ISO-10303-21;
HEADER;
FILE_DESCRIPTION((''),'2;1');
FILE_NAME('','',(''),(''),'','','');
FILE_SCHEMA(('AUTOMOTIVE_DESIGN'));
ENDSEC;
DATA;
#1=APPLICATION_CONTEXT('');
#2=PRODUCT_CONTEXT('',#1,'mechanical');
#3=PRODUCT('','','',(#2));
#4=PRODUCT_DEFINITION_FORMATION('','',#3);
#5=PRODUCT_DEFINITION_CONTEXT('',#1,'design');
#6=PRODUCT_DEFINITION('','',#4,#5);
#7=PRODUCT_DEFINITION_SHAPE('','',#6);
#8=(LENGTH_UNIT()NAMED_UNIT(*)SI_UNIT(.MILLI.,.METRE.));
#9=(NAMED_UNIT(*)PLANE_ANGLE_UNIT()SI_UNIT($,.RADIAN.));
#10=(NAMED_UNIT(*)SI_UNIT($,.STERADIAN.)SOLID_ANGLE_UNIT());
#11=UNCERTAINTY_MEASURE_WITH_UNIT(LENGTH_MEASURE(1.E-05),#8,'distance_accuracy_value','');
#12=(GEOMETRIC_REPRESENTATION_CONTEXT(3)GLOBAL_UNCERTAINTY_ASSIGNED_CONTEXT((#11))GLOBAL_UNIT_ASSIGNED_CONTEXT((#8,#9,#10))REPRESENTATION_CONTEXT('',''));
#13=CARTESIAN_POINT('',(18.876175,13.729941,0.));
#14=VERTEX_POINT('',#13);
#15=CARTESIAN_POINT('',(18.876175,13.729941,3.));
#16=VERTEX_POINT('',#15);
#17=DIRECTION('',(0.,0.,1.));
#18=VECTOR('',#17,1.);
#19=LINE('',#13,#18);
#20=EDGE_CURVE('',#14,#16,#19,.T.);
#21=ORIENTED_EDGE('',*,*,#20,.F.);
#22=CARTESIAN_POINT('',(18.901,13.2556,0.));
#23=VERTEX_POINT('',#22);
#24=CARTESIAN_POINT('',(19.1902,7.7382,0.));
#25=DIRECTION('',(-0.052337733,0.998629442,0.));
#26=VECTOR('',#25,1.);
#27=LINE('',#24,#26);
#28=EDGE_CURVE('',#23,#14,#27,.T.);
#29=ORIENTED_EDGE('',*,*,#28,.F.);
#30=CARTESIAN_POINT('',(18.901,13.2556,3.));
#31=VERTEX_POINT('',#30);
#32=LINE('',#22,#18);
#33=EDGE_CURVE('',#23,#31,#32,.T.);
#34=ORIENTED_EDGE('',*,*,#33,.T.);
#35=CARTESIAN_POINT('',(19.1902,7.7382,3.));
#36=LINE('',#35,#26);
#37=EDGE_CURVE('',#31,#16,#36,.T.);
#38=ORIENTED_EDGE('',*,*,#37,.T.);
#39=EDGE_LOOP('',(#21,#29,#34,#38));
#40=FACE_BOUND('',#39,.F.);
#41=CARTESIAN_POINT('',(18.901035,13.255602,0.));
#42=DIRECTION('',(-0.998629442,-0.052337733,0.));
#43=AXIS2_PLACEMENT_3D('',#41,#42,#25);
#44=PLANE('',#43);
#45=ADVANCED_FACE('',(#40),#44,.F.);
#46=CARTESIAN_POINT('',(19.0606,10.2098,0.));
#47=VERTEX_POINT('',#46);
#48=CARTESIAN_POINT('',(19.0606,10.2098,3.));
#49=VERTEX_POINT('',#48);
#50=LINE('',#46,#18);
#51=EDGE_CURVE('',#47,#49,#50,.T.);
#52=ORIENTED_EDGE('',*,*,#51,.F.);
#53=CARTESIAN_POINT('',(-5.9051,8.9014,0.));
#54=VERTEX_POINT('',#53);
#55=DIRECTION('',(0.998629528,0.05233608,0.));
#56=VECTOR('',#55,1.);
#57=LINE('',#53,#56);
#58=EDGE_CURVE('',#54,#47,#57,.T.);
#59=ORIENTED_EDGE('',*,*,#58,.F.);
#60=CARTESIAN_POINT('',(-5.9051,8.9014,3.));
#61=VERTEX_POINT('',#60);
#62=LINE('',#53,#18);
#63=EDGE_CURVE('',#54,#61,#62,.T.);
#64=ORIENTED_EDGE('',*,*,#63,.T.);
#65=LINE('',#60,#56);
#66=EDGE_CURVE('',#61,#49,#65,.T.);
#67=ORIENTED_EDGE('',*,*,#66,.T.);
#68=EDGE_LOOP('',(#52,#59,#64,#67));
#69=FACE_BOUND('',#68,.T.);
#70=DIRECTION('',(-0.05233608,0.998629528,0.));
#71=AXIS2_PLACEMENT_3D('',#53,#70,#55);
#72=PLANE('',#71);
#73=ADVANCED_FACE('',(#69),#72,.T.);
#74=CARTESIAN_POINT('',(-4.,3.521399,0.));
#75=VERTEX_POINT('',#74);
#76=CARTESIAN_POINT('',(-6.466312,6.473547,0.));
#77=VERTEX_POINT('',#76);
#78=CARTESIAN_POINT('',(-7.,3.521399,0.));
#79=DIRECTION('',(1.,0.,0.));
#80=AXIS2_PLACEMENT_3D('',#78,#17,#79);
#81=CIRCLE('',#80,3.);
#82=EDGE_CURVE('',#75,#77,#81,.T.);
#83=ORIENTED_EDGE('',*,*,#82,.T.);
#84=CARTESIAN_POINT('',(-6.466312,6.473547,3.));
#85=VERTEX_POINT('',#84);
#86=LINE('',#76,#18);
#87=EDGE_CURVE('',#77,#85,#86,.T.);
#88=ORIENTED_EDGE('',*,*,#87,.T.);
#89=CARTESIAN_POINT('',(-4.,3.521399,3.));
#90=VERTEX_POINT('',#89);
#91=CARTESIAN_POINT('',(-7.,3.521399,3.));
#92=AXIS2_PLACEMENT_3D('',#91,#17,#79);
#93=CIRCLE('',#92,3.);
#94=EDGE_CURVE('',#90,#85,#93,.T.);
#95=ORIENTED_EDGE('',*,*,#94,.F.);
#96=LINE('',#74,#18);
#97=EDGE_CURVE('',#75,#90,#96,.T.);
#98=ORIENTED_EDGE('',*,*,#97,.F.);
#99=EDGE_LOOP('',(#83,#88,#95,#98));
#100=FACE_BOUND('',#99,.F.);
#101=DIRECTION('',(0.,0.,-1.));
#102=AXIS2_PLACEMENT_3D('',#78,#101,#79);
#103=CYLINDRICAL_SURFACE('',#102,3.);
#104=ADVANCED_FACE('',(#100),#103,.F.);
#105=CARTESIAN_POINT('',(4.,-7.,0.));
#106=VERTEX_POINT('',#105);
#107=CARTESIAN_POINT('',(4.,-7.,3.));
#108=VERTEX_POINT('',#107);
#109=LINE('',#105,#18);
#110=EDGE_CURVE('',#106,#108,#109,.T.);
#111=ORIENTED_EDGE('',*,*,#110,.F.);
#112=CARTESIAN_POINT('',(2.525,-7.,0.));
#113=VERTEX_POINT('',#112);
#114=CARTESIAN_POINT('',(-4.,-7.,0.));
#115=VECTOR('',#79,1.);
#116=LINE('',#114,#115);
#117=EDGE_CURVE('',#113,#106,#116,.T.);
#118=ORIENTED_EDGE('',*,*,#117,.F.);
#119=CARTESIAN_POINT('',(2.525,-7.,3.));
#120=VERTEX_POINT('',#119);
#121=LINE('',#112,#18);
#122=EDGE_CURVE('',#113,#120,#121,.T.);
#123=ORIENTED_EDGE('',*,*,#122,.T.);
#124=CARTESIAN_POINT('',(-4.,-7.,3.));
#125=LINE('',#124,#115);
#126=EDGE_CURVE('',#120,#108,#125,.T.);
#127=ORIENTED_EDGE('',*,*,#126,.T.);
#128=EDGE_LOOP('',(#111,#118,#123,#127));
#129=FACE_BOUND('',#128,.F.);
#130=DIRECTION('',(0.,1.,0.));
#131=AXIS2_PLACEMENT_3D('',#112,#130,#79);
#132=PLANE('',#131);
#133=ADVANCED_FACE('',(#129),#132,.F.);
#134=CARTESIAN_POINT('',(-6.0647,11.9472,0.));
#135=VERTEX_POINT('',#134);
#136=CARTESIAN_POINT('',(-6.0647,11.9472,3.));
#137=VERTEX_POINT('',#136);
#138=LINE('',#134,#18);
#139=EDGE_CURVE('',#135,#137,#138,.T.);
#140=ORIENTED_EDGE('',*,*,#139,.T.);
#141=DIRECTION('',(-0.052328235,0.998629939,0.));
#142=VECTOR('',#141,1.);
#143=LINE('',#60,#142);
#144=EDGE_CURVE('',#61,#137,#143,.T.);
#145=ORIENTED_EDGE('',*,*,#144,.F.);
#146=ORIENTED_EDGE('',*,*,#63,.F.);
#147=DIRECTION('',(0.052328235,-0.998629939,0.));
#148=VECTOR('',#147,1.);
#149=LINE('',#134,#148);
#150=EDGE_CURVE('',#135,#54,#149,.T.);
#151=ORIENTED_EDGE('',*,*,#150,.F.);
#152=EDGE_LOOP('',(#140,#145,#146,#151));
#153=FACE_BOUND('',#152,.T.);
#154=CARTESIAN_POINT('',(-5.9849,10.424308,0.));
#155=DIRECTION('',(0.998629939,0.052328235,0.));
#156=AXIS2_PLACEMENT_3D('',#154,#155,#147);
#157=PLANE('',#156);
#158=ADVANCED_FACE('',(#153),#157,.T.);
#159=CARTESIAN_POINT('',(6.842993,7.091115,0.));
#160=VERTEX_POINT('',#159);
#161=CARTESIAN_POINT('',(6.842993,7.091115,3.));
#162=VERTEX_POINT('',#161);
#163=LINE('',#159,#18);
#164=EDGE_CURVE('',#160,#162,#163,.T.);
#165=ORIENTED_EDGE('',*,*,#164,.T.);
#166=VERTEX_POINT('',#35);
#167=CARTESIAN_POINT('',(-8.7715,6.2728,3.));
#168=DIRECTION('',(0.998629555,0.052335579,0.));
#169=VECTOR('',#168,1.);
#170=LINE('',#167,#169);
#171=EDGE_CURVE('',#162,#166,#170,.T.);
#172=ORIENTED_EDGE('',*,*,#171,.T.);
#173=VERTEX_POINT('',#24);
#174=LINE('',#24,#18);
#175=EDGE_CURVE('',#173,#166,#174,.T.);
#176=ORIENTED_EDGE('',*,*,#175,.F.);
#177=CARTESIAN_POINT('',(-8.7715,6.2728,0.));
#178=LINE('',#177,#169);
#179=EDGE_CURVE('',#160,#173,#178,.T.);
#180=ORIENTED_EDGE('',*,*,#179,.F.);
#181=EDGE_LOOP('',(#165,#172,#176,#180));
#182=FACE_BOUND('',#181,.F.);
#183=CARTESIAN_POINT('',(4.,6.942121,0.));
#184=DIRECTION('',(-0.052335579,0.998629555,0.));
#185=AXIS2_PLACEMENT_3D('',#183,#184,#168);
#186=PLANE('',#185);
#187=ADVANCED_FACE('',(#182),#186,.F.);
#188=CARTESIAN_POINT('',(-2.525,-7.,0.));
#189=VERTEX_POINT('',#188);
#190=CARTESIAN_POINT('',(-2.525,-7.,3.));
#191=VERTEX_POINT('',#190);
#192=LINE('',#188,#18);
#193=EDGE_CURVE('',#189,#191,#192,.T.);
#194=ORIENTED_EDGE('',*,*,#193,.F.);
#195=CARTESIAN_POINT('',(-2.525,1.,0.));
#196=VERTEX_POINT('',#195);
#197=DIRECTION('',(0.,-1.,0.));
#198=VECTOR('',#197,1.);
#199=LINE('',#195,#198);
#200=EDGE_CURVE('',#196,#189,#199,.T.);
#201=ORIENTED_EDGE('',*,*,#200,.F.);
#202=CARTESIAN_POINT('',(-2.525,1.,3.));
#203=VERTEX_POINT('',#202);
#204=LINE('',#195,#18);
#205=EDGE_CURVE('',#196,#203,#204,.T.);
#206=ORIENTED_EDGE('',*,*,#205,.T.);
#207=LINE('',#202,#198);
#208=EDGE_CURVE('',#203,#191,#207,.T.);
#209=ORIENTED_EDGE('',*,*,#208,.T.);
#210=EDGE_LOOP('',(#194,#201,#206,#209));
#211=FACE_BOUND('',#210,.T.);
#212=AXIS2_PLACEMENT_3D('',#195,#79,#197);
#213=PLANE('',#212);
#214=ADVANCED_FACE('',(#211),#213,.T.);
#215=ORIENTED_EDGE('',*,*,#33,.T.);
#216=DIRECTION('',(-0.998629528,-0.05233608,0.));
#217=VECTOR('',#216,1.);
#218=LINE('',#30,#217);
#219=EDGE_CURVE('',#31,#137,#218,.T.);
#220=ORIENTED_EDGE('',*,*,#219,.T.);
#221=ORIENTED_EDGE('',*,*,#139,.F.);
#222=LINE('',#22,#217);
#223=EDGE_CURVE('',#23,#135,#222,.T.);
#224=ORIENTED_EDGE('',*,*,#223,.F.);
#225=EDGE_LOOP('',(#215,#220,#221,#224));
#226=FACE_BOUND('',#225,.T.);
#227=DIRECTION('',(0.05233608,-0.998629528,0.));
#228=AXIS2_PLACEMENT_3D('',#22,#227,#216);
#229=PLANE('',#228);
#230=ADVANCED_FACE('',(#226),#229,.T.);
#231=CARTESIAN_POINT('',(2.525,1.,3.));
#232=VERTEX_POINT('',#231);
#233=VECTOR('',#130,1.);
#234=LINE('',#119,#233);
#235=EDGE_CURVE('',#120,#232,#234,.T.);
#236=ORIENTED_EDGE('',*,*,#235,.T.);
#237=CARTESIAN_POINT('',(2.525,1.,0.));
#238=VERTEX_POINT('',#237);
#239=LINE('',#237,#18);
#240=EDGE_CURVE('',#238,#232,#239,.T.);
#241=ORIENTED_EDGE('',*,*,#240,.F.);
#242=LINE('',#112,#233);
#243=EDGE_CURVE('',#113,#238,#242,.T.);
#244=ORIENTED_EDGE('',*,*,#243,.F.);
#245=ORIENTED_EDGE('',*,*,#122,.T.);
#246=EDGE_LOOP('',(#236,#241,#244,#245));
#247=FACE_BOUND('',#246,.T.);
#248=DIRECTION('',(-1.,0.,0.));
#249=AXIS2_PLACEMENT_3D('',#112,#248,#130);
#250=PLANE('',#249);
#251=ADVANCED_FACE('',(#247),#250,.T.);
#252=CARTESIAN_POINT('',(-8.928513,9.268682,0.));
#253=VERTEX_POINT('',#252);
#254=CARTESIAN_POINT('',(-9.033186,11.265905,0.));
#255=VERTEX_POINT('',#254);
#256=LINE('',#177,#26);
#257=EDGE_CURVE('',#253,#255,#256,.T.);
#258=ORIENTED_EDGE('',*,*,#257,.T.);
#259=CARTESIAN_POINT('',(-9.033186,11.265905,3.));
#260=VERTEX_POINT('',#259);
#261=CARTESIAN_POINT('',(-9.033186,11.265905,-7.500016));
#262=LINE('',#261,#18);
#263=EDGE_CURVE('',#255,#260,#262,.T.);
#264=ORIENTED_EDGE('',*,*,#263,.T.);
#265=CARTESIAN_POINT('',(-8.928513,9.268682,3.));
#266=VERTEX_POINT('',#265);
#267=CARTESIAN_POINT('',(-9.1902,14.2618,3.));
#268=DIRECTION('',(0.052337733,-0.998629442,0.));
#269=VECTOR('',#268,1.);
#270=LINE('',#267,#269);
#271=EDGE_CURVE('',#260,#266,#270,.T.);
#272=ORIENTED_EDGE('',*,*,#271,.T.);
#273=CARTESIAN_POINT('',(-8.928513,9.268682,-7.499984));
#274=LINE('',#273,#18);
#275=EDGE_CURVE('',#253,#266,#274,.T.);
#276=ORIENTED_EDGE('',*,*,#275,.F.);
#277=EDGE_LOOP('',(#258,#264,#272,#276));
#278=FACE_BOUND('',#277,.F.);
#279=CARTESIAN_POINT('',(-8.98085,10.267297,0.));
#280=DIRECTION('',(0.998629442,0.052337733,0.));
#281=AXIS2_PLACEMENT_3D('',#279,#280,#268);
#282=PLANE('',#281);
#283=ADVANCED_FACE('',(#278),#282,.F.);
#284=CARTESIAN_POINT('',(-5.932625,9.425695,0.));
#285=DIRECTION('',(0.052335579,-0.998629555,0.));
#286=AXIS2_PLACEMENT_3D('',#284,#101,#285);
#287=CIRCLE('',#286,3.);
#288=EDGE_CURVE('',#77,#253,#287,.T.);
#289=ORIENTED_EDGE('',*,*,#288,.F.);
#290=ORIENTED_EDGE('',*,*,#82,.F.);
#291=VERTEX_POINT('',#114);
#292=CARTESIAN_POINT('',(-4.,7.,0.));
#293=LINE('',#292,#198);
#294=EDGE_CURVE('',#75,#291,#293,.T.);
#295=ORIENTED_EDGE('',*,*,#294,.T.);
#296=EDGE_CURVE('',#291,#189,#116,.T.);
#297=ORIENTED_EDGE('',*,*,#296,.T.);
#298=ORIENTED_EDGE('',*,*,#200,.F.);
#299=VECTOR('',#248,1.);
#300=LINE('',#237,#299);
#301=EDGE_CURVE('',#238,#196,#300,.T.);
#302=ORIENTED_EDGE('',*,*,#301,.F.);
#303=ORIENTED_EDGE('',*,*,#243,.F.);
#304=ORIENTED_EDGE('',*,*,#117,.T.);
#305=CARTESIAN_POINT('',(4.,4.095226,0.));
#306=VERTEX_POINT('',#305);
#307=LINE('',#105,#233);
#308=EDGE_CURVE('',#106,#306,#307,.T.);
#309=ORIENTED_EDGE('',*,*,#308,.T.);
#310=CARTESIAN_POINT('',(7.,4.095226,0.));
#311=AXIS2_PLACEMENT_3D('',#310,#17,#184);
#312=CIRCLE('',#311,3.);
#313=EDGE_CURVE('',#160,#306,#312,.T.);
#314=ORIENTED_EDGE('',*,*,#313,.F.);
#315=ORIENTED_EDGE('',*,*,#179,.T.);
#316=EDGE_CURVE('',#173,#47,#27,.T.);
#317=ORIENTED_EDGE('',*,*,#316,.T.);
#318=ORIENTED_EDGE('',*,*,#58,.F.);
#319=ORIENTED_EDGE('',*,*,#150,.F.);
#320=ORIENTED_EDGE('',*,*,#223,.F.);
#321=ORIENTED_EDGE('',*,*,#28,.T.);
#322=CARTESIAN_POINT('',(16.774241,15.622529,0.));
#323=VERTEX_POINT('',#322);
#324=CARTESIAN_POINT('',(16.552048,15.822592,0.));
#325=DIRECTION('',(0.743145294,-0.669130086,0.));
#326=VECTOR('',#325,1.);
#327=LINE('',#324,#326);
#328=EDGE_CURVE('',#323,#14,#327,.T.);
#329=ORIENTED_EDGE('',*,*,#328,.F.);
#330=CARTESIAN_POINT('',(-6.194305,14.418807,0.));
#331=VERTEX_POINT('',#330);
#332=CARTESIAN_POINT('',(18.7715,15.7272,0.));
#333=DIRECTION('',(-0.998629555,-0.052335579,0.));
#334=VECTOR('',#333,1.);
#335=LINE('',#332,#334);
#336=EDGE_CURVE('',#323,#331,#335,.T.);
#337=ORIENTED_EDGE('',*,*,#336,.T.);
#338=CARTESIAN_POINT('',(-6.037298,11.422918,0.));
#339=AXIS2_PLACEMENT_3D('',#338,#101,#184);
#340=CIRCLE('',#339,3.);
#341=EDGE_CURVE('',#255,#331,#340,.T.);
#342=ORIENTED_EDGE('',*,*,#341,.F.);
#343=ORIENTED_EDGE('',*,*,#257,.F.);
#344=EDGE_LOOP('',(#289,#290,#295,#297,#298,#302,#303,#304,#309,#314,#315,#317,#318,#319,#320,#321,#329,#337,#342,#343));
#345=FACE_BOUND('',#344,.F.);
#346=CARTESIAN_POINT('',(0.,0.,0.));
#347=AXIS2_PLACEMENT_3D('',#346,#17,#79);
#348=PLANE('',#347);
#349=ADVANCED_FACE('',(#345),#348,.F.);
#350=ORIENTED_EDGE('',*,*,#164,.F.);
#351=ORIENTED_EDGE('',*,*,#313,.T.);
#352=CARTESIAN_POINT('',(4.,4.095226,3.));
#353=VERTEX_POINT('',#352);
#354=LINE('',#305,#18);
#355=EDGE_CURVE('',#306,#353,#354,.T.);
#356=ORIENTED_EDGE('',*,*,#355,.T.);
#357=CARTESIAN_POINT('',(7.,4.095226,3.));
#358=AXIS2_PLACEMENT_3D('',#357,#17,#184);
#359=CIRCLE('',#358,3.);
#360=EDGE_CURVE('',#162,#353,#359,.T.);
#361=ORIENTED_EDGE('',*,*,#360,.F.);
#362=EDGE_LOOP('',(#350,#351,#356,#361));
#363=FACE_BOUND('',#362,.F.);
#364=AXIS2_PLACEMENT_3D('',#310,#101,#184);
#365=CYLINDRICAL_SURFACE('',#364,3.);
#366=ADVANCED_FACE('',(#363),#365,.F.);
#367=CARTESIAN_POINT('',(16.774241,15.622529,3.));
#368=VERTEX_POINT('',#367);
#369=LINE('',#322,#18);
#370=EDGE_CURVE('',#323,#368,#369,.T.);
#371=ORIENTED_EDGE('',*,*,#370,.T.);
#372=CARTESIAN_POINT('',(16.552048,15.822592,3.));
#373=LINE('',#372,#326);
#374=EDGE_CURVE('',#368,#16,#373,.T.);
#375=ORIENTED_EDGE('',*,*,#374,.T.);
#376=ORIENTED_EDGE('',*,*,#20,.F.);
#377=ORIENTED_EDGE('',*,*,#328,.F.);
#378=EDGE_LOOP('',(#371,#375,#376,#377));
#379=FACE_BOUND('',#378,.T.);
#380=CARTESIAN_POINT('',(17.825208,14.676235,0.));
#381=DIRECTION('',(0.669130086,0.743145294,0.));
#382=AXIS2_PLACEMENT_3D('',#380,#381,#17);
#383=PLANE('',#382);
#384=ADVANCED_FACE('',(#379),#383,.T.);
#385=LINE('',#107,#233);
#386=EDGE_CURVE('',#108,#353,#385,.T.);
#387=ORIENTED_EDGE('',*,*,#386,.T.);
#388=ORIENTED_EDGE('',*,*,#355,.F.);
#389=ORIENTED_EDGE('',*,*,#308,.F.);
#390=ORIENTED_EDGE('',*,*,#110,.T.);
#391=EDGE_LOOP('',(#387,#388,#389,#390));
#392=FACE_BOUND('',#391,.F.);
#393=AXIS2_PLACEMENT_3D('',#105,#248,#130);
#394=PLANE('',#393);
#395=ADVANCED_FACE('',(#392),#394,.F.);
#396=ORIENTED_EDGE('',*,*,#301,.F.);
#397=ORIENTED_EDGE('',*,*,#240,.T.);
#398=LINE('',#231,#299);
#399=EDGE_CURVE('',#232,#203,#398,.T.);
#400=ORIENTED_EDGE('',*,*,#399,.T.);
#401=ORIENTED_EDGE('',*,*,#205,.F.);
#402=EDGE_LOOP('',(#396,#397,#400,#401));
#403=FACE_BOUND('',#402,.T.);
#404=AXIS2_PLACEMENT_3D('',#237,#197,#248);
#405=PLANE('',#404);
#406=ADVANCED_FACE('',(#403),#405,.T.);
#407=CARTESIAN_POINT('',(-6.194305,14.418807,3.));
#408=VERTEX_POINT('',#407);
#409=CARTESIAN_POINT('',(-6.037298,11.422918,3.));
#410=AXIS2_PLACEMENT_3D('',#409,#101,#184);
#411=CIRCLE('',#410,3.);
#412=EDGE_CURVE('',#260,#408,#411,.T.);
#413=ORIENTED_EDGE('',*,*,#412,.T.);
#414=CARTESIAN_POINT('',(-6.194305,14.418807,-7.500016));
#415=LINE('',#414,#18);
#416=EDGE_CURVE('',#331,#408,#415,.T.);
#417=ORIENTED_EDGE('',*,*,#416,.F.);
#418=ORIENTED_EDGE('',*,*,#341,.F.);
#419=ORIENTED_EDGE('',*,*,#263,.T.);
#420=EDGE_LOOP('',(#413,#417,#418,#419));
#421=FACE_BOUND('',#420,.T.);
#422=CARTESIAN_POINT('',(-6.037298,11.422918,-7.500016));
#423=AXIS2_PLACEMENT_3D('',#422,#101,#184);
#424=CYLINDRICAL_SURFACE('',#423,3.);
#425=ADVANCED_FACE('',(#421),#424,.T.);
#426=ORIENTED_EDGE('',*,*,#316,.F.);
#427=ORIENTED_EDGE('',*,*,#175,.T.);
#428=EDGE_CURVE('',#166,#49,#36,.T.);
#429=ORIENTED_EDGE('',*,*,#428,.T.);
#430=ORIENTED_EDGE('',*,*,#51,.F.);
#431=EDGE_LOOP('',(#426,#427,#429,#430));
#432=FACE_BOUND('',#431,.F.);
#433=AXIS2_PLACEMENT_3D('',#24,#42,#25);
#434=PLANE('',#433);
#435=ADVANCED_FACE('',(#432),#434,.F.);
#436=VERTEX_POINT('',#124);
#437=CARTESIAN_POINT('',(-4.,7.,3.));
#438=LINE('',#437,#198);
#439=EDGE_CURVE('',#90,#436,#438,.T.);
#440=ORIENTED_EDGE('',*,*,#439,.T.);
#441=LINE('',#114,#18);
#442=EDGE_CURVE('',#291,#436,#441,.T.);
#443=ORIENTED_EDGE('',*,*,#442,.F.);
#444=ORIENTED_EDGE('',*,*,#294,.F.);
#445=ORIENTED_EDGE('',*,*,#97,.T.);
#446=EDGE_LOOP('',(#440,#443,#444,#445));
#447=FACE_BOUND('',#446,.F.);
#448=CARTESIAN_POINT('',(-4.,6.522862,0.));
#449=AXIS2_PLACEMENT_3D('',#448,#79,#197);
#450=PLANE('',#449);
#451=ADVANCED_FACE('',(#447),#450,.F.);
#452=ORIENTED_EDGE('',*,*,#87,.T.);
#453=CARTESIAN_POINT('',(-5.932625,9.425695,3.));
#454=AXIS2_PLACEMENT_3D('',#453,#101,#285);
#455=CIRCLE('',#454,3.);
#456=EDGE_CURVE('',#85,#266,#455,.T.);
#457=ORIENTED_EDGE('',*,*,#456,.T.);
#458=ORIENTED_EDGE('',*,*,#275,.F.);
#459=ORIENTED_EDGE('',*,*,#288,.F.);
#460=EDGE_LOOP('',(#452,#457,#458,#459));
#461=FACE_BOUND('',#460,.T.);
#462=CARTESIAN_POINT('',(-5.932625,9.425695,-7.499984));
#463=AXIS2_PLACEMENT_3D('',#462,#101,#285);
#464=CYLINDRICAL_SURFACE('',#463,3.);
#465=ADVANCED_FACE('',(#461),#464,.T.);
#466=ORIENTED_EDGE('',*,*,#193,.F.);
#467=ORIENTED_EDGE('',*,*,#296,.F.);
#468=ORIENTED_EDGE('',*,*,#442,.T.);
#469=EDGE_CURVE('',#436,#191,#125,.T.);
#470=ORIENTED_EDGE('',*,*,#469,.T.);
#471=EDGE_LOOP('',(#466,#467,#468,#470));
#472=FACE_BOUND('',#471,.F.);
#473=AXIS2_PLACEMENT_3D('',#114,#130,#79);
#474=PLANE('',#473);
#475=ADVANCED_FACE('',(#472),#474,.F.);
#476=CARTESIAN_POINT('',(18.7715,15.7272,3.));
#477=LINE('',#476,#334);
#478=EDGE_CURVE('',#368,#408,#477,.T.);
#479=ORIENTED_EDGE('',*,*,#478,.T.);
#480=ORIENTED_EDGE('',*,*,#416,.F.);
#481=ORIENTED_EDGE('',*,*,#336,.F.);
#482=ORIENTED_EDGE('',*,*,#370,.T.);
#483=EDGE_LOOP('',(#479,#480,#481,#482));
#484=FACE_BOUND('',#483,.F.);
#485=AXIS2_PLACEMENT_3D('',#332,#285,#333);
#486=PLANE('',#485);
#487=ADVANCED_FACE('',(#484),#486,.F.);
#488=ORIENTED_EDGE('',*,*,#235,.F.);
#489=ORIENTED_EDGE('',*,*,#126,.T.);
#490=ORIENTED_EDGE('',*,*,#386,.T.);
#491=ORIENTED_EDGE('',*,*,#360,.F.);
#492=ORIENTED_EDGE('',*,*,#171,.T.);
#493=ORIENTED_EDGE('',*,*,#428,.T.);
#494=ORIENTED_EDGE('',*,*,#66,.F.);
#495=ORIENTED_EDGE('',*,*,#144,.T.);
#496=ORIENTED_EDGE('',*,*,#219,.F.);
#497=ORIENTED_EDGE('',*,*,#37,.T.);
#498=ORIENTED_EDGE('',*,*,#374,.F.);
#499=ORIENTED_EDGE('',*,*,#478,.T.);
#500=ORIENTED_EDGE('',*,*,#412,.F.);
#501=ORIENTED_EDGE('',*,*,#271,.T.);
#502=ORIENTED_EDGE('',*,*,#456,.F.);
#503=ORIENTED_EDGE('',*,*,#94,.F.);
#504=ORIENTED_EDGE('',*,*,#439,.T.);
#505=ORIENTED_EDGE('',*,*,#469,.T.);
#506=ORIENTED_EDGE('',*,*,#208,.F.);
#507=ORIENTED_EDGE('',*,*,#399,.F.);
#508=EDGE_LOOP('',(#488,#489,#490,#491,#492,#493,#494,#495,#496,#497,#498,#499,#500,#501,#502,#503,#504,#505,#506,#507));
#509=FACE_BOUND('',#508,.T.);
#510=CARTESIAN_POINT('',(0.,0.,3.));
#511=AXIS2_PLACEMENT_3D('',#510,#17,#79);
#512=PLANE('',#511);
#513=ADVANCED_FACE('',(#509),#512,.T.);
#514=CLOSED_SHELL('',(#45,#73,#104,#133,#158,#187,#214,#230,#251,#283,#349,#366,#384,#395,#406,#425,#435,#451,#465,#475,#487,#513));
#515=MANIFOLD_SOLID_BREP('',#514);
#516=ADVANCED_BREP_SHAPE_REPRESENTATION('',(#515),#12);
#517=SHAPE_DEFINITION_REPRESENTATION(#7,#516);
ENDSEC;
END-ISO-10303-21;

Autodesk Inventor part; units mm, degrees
ref_plane "YZ Plane" through (0, 0, 0) normal (1, 0, 0) x (0, 1, 0)
ref_plane "XZ Plane" through (0, 0, 0) normal (0, 1, 0) x (-1, 0, 0)
ref_plane "XY Plane" through (0, 0, 0) normal (0, 0, 1) x (1, 0, 0)
sketch "Sketch1" plane through (0, 0, 0) normal (0, 0, 1) x (1, 0, 0)
  line L0 (-4, -7) -> (4, -7)
  line L1 (4, -7) -> (4, 7)
  line L2 (4, 7) -> (-4, 7)
  line L3 (-4, 7) -> (-4, -7)
  line L4 (-4, -7) -> (4, 7) construction
  line L5 (4, -7) -> (-4, 7) construction
  line L6 (19.1902, 7.7382) -> (18.7715, 15.7272)
  line L7 (18.7715, 15.7272) -> (-9.1902, 14.2618)
  line L8 (-9.1902, 14.2618) -> (-8.7715, 6.2728)
  line L9 (-8.7715, 6.2728) -> (19.1902, 7.7382)
  line L10 (19.1902, 7.7382) -> (-9.1902, 14.2618) construction
  line L11 (18.7715, 15.7272) -> (-8.7715, 6.2728) construction
  line L12 (19.0606, 10.2098) -> (18.901, 13.2556)
  line L13 (18.901, 13.2556) -> (-6.0647, 11.9472)
  line L14 (-6.0647, 11.9472) -> (-5.9051, 8.9014)
  line L15 (-5.9051, 8.9014) -> (19.0606, 10.2098)
  line L16 (-8.9808, 10.2673) -> (18.9808, 11.7327)
  line L17 (-2.525, -7) -> (2.525, -7)
  line L18 (2.525, -7) -> (2.525, 1)
  line L19 (2.525, 1) -> (-2.525, 1)
  line L20 (-2.525, 1) -> (-2.525, -7)
  point P0 (0, 0)
  point P1 (0, 0)
  point P2 (5, 11)
  point P3 (5, 11)
  point P4 (5, 11)
  point P5 (0, 1)
  point P6 (0, -7)
  point P7 (-4, 6.5228)
  point P8 (4, 6.9421)
  point P9 (19.0606, 10.2098)
  point P10 (18.901, 13.2556)
  dimension "d19" = 8
  dimension "d20" = 14
  dimension "d21" = 5
  dimension "d22" = 3
  dimension "d23" = 4
  dimension "d24" = 8
  dimension "d25" = 28
  dimension "d27" = 3.05
  dimension "d29" = 25
  dimension "d30" = 5.05
  dimension "d31" = 8
extrude "Plate1" add sketch "Sketch1" along normal blind 3 contours L3 L9 L1 L0 L18 L19 L20 | L9 L8 L16 L14 L15 L6 L1 L2 L3 | L3 L2 L1 L9 | L8 L7 L6 L13 L14 L16
chamfer "Corner Chamfer1" distance 2 angle 45 1 edges at (18.7715, 15.7272, 1.5)
fillet "Corner Round2" radius 3 4 edges at (4, 6.9421, 1.5) (-8.7715, 6.2728, 1.5) (-4, 6.5228, 1.5) (-9.1902, 14.2618, 1.5)
equation "\"d14\" = Thickness"
equation "\"BendRadius\" = Thickness"
equation "\"BendReliefWidth\" = Thickness"
equation "\"BendReliefDepth\" = 0.5 * Thickness"
equation "\"CornerReliefSize\" = 4 * Thickness"
equation "\"MinimumRemnant\" = 2 * Thickness"
equation "\"TransitionRadius\" = BendRadius"
equation "\"JacobiRadiusSize\" = BendRadius"
equation "\"GapSize\" = Thickness"
equation "\"Thickness\" = 3"
properties part number "Path Plate Connector"
